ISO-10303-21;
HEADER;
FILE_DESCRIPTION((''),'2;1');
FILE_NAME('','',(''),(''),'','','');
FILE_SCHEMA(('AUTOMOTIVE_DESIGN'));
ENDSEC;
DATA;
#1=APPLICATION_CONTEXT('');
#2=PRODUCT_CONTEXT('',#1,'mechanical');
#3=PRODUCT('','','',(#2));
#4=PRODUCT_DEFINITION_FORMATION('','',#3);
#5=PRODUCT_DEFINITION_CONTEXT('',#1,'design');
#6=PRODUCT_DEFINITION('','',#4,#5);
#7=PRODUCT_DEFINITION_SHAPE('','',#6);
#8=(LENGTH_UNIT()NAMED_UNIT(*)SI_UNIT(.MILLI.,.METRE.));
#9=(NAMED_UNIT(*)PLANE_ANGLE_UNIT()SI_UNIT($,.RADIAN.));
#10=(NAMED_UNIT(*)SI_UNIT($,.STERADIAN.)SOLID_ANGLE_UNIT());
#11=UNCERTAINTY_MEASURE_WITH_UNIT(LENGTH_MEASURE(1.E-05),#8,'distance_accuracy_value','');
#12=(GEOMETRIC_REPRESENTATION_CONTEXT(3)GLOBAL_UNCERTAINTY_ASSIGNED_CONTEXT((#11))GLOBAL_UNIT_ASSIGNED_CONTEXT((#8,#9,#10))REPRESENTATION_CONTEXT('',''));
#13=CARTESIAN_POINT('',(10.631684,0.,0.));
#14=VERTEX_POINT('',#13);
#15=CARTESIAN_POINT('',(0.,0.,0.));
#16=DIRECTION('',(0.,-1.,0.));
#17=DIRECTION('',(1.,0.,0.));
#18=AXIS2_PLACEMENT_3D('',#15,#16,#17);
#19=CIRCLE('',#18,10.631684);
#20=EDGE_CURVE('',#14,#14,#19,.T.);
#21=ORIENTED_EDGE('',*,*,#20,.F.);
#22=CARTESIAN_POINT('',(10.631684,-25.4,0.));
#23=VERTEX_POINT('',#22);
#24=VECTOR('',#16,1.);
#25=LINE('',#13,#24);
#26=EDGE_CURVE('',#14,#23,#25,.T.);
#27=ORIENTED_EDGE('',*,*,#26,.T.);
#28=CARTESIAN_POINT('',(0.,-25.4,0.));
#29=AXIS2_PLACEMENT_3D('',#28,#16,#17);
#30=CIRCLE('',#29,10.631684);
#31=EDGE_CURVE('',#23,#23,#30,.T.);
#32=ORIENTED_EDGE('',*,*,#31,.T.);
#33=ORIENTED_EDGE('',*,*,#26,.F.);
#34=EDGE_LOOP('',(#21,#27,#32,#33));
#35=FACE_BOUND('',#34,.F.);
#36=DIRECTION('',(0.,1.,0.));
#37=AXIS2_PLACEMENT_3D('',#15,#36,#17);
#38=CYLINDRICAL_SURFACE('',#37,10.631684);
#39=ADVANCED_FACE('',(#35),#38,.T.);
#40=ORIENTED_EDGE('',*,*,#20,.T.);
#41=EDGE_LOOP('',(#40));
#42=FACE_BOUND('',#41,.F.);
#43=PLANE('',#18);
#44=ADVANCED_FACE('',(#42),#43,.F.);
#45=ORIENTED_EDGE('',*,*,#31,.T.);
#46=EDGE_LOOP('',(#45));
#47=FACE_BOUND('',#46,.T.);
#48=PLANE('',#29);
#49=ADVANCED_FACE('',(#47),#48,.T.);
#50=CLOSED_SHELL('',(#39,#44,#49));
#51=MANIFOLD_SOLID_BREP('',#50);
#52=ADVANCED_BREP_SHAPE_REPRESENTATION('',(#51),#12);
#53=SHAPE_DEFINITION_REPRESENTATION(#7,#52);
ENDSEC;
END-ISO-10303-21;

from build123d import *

# Parameters (mm, degrees)
F6_R     = 10.6316838629
F7_DEPTH = 25.4


# Not quite as in the source:
# - a feature of the source that left no trace in its solid (it failed there, or was rolled back) is left out


with BuildPart() as f7:
    # F6 (on Front) → F7 (new body)
    with BuildSketch(Plane.XZ):
        Circle(F6_R)
    extrude(amount=F7_DEPTH)


solid = f7.part
